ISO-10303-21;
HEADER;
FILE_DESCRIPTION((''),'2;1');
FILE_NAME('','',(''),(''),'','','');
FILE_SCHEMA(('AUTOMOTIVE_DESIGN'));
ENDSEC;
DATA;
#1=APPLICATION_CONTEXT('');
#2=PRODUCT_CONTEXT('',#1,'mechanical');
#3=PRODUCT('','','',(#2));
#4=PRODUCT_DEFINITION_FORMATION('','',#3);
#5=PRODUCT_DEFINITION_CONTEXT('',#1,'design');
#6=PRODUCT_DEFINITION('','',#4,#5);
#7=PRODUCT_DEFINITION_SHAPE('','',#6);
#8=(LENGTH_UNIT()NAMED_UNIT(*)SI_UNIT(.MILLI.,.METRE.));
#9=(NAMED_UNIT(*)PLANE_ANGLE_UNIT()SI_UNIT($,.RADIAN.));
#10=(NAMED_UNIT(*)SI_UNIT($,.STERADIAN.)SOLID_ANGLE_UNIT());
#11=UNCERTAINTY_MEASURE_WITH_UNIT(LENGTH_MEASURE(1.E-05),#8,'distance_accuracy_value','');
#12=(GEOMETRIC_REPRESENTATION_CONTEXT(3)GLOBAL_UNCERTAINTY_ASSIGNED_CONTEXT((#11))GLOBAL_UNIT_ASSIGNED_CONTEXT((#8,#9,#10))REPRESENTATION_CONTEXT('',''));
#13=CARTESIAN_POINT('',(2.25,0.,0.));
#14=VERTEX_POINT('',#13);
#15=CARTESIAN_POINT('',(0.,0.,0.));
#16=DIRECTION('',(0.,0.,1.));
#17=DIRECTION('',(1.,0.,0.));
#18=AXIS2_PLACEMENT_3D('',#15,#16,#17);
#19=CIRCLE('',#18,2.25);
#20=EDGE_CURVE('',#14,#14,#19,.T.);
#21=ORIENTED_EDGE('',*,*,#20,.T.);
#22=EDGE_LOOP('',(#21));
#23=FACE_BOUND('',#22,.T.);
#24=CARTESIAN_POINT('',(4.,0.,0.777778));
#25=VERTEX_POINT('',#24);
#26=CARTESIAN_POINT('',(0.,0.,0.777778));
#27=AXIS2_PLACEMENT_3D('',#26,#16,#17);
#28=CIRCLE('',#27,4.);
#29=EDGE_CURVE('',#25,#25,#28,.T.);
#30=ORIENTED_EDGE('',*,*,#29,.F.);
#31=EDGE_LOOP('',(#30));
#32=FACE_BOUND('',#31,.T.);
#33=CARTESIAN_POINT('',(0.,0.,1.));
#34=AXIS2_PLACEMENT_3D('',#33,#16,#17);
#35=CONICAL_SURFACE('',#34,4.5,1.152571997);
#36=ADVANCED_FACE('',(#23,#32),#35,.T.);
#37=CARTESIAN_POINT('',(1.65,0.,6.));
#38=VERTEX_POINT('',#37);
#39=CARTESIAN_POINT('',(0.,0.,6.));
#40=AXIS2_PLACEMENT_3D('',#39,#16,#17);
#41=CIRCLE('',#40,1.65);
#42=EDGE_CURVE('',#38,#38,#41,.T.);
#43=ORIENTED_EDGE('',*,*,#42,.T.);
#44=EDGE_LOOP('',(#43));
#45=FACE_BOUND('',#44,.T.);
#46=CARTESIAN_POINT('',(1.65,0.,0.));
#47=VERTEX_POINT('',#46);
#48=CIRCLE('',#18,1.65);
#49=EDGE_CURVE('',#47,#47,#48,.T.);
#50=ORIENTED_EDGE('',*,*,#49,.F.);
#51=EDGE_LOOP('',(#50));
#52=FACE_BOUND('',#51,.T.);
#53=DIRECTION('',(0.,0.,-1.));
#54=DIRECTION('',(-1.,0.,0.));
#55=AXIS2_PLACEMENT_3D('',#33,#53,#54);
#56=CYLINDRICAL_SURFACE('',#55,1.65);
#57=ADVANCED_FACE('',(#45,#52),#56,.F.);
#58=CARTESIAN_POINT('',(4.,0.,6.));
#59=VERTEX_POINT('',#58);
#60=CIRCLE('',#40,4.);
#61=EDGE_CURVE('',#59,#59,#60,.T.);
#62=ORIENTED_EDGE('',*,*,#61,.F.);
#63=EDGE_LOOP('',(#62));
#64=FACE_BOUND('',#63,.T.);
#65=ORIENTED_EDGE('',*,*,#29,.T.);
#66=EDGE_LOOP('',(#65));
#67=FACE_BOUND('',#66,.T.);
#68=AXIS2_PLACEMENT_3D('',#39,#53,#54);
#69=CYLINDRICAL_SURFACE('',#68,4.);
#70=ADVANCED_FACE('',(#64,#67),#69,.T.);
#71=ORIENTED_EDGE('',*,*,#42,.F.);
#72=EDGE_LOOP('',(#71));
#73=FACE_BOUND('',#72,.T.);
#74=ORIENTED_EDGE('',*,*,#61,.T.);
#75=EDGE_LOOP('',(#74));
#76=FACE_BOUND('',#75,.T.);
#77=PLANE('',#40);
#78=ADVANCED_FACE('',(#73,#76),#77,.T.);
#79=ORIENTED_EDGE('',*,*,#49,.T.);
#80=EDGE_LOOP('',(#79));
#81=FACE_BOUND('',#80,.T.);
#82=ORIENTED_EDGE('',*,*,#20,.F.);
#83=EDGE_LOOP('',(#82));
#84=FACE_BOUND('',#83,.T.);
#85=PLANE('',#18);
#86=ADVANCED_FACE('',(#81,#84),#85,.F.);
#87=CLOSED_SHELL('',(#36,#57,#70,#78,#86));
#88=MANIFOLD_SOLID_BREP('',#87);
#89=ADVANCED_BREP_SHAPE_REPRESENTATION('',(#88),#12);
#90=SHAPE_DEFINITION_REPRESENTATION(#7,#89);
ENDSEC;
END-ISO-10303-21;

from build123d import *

# Parameters (mm, degrees)
SKETCH1_R           = 2.25
SKETCH1_R_2         = 1.65
BOSS_EXTRUDE1_DEPTH = 1
SKETCH2_R           = 4
SKETCH2_R_2         = 1.65
BOSS_EXTRUDE2_DEPTH = 5
CHAMFER1_SIZE       = 1
CHAMFER1_SIZE_2     = 2.25


with BuildPart() as part:
    # Sketch1 → Boss-Extrude1 (new body)
    with BuildSketch(Plane.XY):
        Circle(SKETCH1_R)
        Circle(SKETCH1_R_2, mode=Mode.SUBTRACT)
    extrude(amount=BOSS_EXTRUDE1_DEPTH)

    # Sketch2 → Boss-Extrude2 (add)
    with BuildSketch(Plane.XY.offset(1)):
        Circle(SKETCH2_R)
        Circle(SKETCH2_R_2, mode=Mode.SUBTRACT)
    extrude(amount=BOSS_EXTRUDE2_DEPTH)

    # Chamfer1
    # the kernel refuses this chamfer: 2.25, 1 mm, written as the material it adds along each edge
    with BuildSketch(Plane(origin=(0, 0, 1), x_dir=(1, 0, 0), z_dir=(0, -1, 0))) as chamfer1_piece_1_section:
        Polygon((2.25, -CHAMFER1_SIZE), (2.25 + CHAMFER1_SIZE_2, 0), (2.25, 0), align=None)
    chamfer1_piece_1 = revolve(axis=Axis((0, 0, 1), (0, 0, 1)), mode=Mode.PRIVATE)
    chamfer1_piece_1 = split(chamfer1_piece_1, bisect_by=Plane(origin=(-3.113599445, 0, 0), z_dir=(0, 0, 1)), keep=Keep.TOP, mode=Mode.PRIVATE)
    chamfer1_piece_1 = chamfer1_piece_1 & Plane(origin=(0, 0, 0.414540138), x_dir=(1, 0, 0), z_dir=(0, 0, -1)) * Cylinder(4, 18, mode=Mode.PRIVATE)
    add(chamfer1_piece_1)


solid = part.part
